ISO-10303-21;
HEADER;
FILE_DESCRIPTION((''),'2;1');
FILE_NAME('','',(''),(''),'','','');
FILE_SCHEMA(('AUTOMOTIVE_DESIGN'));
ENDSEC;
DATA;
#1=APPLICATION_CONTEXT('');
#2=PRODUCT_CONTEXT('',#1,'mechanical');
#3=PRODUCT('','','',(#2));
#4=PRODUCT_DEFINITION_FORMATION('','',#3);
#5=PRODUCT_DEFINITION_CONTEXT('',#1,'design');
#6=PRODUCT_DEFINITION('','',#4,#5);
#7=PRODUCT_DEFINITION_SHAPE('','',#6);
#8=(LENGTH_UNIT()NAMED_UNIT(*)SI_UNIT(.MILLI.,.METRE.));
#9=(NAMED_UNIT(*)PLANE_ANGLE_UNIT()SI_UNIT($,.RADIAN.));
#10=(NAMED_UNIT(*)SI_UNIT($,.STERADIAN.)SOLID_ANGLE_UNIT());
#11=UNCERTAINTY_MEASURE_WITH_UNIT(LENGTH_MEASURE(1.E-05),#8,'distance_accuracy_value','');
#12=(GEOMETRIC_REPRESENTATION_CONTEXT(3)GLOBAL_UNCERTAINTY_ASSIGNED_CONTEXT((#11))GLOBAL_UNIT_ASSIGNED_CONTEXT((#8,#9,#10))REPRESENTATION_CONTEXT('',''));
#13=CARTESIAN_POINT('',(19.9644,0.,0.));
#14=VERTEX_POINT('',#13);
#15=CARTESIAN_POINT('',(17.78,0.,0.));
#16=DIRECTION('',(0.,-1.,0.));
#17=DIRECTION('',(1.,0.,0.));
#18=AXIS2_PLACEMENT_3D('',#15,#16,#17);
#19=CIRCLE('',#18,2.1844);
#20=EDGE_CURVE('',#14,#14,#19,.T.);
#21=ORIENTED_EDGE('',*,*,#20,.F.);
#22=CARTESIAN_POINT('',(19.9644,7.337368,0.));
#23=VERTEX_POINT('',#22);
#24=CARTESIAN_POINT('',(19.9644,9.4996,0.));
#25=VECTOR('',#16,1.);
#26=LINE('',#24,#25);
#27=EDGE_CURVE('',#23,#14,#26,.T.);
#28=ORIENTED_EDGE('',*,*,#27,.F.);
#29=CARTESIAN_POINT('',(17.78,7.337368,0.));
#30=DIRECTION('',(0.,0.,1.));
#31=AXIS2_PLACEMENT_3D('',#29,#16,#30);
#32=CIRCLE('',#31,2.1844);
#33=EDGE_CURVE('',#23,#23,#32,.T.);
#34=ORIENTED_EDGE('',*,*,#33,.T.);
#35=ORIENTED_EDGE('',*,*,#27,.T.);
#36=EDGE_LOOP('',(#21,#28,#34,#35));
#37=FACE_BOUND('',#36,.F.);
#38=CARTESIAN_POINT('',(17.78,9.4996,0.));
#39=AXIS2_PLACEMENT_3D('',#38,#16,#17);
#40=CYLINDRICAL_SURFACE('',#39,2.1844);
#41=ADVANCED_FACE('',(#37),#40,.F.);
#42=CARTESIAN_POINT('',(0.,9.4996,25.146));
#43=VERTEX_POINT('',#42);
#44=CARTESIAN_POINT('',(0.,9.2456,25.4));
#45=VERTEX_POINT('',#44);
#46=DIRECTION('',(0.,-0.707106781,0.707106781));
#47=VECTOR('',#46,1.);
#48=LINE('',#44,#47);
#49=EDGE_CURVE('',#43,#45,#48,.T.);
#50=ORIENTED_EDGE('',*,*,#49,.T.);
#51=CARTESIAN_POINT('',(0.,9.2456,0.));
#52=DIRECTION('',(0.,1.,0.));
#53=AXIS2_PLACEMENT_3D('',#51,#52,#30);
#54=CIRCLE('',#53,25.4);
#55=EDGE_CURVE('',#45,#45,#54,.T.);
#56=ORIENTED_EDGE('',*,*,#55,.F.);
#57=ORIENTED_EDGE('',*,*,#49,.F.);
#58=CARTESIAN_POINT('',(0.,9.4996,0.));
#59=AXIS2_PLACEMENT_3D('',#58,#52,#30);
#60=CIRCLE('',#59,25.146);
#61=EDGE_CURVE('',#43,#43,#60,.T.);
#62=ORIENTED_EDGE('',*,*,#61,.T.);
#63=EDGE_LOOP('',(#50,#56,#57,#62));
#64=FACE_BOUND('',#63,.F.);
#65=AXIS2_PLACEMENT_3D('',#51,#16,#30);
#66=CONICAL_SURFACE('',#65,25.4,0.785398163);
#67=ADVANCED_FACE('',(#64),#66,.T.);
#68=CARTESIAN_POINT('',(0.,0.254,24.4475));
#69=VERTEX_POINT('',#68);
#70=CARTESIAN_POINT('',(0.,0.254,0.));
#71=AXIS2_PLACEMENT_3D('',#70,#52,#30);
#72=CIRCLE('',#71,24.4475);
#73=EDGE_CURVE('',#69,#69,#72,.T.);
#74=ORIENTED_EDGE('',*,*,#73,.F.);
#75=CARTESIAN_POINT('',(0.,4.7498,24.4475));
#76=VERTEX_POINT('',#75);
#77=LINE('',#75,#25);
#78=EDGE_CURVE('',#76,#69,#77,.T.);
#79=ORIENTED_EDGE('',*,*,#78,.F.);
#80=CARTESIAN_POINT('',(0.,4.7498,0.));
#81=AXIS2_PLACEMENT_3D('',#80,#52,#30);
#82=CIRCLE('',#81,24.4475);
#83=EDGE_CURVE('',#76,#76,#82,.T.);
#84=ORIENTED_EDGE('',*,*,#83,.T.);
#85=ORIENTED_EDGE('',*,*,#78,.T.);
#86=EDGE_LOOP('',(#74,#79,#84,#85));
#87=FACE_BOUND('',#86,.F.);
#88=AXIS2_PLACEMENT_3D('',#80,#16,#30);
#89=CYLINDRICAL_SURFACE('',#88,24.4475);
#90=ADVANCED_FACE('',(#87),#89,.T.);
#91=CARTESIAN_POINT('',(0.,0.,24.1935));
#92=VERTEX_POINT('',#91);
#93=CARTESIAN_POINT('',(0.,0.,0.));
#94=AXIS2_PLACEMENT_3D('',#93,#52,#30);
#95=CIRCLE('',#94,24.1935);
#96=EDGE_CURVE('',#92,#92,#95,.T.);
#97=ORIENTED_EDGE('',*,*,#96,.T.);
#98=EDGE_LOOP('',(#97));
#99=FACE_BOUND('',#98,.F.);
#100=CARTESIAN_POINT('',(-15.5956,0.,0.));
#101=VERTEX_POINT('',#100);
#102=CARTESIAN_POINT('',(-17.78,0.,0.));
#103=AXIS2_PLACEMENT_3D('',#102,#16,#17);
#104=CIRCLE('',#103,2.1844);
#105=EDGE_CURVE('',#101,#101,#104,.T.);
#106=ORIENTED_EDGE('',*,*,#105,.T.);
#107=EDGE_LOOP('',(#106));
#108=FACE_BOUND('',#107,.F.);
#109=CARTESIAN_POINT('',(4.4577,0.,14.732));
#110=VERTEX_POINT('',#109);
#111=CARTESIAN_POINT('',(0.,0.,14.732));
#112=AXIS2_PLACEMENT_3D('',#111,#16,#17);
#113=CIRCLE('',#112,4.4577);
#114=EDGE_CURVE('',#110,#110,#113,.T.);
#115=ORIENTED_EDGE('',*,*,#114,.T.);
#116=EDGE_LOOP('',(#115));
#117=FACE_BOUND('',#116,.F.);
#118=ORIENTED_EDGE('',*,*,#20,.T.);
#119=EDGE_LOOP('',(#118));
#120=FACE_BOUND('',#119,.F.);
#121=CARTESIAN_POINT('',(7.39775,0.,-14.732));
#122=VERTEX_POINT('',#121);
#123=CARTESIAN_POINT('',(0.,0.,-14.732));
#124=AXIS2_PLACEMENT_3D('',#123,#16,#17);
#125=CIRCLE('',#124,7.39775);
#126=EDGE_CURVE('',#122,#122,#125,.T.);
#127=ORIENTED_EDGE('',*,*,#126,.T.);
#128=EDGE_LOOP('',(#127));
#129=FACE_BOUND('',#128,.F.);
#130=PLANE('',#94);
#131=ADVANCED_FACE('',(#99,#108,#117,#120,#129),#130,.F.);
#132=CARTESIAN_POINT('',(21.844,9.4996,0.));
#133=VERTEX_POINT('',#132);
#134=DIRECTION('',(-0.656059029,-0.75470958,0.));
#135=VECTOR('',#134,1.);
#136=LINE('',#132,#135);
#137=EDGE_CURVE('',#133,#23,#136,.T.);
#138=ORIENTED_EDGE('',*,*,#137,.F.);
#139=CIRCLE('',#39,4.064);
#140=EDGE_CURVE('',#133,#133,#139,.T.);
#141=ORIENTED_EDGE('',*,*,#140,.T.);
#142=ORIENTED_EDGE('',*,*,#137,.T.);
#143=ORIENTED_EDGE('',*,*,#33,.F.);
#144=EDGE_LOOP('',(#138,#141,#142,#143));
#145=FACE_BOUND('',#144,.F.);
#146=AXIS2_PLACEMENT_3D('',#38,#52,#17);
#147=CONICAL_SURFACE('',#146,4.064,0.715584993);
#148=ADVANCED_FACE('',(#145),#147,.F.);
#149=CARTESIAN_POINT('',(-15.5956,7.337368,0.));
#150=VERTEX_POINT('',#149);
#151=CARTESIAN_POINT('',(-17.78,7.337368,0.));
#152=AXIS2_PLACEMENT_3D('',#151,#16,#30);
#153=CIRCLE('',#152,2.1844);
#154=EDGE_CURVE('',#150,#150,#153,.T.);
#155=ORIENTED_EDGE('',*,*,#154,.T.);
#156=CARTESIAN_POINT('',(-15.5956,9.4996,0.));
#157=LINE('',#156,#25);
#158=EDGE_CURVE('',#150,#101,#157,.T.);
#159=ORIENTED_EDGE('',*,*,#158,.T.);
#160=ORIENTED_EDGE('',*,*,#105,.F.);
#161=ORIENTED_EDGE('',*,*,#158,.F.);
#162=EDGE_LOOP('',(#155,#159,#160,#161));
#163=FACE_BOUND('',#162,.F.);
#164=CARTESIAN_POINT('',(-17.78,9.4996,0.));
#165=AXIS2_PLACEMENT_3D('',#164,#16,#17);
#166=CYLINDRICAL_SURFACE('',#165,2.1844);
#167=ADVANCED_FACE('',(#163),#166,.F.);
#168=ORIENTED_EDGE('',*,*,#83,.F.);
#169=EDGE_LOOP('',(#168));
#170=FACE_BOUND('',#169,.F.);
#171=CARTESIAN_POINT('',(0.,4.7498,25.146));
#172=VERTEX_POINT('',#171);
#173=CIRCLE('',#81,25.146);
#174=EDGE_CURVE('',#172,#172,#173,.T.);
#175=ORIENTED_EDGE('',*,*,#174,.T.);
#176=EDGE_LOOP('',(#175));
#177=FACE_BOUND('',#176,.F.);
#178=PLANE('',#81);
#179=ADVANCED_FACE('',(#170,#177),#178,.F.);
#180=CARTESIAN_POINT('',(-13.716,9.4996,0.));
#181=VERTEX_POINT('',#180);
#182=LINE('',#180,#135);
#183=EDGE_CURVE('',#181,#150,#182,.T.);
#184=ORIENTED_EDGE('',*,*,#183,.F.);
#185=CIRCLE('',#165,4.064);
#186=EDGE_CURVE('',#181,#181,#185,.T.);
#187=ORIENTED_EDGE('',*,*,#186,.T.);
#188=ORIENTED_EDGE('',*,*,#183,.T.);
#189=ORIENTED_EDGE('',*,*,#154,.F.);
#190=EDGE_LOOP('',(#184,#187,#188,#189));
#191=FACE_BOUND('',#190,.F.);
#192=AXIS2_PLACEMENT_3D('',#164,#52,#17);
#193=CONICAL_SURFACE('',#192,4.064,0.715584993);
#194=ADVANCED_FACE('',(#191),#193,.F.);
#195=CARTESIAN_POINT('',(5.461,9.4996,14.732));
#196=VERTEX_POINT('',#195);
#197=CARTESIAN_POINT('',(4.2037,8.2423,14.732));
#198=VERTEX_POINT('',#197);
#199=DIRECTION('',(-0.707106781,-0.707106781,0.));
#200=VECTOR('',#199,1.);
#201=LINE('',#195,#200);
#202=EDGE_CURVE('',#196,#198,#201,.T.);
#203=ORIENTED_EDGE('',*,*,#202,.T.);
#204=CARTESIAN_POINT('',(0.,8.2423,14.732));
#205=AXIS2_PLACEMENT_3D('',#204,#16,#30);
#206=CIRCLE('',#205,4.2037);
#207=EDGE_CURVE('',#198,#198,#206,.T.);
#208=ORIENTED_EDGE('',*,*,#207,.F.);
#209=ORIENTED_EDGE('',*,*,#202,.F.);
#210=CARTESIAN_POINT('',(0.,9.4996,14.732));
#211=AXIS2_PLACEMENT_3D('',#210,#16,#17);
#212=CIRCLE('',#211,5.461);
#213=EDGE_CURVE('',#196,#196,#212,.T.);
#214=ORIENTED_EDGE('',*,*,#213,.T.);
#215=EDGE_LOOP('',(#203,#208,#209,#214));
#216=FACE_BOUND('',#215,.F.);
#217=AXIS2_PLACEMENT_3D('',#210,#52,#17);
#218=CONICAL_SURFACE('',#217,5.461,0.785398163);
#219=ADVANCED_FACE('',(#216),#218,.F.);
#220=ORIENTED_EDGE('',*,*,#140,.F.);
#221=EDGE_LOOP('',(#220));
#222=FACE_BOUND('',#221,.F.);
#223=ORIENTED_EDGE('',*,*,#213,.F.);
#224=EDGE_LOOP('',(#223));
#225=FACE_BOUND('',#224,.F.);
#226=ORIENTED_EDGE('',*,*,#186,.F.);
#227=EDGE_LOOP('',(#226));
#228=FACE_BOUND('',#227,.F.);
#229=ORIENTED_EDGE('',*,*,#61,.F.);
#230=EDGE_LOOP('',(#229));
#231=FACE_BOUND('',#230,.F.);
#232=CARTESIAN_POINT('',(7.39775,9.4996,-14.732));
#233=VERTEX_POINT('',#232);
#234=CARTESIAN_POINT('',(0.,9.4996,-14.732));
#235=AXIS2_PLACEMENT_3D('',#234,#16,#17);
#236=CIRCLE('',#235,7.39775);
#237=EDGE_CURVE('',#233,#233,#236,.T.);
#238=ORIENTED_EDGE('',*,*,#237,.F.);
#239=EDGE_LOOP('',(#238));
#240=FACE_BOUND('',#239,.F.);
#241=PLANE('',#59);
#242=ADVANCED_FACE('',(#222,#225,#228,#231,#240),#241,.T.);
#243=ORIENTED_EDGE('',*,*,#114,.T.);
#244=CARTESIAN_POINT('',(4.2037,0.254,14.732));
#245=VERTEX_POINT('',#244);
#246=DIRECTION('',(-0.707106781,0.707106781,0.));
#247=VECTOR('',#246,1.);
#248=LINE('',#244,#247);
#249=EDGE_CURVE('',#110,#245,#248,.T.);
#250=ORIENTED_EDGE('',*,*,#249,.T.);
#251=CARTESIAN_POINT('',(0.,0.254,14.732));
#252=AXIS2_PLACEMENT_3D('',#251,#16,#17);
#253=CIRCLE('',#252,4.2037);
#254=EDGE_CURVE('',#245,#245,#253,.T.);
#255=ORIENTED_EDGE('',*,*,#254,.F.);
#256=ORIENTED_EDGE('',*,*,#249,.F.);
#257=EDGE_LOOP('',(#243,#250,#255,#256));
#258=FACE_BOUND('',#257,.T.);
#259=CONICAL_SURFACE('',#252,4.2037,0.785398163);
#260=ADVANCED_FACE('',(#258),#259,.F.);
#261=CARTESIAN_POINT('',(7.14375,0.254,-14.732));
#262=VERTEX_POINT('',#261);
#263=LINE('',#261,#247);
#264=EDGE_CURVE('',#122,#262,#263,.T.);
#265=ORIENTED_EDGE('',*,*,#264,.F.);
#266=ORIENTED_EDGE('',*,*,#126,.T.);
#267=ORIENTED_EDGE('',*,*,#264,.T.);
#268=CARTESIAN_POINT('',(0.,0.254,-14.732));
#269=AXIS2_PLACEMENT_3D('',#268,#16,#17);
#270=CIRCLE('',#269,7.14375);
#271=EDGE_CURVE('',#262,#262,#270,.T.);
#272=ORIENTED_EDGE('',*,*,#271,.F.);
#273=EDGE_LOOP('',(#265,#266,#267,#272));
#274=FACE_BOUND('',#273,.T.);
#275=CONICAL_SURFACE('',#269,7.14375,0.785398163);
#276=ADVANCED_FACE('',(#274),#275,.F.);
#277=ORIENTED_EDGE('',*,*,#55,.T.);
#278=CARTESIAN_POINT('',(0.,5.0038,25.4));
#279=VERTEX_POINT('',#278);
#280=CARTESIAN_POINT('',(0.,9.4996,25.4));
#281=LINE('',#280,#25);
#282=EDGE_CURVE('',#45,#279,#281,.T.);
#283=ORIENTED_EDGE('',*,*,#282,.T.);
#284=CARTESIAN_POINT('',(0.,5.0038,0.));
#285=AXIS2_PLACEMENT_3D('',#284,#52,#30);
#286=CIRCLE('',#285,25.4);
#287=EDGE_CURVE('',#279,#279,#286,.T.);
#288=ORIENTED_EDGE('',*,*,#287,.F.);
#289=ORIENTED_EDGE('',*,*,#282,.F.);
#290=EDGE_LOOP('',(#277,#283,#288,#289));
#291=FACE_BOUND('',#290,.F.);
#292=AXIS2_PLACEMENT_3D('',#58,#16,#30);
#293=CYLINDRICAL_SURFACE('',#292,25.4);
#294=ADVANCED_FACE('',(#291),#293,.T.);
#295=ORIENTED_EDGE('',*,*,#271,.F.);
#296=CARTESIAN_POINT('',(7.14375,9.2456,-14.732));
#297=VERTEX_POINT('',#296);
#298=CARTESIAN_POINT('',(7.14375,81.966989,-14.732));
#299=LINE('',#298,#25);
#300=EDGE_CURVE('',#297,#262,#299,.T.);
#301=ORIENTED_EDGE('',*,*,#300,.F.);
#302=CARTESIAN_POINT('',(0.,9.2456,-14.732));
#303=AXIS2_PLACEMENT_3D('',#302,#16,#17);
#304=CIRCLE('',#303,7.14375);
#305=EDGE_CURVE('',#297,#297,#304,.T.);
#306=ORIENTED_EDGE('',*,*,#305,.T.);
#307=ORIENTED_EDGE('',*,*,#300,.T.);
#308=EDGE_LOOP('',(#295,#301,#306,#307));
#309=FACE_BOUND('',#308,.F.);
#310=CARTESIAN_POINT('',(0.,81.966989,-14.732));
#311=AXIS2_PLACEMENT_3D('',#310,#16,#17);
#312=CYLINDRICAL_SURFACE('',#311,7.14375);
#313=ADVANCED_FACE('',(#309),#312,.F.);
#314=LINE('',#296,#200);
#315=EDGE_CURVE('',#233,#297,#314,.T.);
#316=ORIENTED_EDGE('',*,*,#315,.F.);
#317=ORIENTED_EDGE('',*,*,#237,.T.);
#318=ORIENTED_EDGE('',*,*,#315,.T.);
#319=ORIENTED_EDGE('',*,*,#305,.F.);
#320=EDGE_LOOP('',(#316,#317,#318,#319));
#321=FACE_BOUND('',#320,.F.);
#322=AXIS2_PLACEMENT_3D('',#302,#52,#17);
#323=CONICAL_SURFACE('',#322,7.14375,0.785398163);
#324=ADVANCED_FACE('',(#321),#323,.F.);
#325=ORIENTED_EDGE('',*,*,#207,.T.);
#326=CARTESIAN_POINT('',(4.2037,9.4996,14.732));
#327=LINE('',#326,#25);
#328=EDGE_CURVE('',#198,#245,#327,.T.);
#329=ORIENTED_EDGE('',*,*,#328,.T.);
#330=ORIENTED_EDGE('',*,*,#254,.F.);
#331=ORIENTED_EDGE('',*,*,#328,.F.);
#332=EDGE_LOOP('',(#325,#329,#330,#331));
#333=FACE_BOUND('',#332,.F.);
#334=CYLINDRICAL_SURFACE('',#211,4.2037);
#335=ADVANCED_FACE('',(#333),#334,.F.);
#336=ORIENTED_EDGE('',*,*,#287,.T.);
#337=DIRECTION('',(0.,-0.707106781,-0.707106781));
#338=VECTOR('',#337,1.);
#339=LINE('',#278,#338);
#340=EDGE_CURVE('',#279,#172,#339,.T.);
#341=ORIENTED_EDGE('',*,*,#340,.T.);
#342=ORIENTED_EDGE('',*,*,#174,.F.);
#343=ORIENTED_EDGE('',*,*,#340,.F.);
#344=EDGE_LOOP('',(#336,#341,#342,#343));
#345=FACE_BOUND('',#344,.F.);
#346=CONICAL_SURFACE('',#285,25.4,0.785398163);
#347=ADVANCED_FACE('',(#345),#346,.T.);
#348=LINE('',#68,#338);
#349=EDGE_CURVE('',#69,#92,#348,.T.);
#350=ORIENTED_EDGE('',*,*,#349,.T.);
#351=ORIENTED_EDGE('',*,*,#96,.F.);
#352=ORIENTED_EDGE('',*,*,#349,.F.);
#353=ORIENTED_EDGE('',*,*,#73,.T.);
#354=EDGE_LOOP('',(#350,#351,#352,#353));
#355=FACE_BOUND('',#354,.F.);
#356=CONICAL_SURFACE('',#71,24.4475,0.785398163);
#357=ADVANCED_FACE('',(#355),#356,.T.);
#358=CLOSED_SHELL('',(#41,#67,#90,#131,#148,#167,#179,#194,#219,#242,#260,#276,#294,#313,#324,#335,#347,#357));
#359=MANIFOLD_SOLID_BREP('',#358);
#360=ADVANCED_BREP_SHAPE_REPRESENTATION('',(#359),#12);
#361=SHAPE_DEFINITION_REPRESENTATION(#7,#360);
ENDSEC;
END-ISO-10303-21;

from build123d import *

# Parameters (mm, degrees)
F3_D           = 14.2875
F4_D           = 8.4074
F4_CSINK_D     = 10.922
F4_CSINK_ANGLE = 90
F5_D           = 4.3688
F5_CSINK_D     = 8.128
F5_CSINK_ANGLE = 82
F6_SIZE2       = 0.254
F6_SIZE        = 0.254


with BuildPart() as f1:
    # F0 (on Right) → F1 (revolve)
    with BuildSketch(Plane.YZ):
        Polygon((4.7498, 24.4475), (0, 24.4475), (0, 0), (9.4996, 0), (9.4996, 25.4), (4.7498, 25.4), align=None)
    revolve(axis=Axis((0, 5.1186173223, 0), (0, 1, 0)))

    # F3 (through all)
    with Locations(Plane(origin=(0, 9.4996, 0), x_dir=(-1, 0, 0), z_dir=(0, 1, 0))):
        with Locations((0, -14.732)):
            Hole(F3_D / 2)

    # F4 (through all)
    with Locations(Plane(origin=(0, 9.4996, 0), x_dir=(-1, 0, 0), z_dir=(0, 1, 0))):
        with Locations((0, 14.732)):
            CounterSinkHole(F4_D / 2, F4_CSINK_D / 2, counter_sink_angle=F4_CSINK_ANGLE)

    # F5 (through all)
    with Locations(Plane(origin=(0, 9.4996, 0), x_dir=(-1, 0, 0), z_dir=(0, 1, 0))):
        with Locations((-17.78, 0), (17.78, 0)):
            CounterSinkHole(F5_D / 2, F5_CSINK_D / 2, counter_sink_angle=F5_CSINK_ANGLE)

    # F6
    f6_edges = [f1.edges().sort_by_distance(p)[0] for p in [
        (0, 9.4996, -25.4),
        (0, 0, -24.4475),
        (0, 4.7498, -25.4),
        (7.14375, 0, -14.732),
        (4.2037, 0, 14.732),
        (7.14375, 9.4996, -14.732),
    ]]
    chamfer(f6_edges, length=F6_SIZE, length2=F6_SIZE2)


solid = f1.part
